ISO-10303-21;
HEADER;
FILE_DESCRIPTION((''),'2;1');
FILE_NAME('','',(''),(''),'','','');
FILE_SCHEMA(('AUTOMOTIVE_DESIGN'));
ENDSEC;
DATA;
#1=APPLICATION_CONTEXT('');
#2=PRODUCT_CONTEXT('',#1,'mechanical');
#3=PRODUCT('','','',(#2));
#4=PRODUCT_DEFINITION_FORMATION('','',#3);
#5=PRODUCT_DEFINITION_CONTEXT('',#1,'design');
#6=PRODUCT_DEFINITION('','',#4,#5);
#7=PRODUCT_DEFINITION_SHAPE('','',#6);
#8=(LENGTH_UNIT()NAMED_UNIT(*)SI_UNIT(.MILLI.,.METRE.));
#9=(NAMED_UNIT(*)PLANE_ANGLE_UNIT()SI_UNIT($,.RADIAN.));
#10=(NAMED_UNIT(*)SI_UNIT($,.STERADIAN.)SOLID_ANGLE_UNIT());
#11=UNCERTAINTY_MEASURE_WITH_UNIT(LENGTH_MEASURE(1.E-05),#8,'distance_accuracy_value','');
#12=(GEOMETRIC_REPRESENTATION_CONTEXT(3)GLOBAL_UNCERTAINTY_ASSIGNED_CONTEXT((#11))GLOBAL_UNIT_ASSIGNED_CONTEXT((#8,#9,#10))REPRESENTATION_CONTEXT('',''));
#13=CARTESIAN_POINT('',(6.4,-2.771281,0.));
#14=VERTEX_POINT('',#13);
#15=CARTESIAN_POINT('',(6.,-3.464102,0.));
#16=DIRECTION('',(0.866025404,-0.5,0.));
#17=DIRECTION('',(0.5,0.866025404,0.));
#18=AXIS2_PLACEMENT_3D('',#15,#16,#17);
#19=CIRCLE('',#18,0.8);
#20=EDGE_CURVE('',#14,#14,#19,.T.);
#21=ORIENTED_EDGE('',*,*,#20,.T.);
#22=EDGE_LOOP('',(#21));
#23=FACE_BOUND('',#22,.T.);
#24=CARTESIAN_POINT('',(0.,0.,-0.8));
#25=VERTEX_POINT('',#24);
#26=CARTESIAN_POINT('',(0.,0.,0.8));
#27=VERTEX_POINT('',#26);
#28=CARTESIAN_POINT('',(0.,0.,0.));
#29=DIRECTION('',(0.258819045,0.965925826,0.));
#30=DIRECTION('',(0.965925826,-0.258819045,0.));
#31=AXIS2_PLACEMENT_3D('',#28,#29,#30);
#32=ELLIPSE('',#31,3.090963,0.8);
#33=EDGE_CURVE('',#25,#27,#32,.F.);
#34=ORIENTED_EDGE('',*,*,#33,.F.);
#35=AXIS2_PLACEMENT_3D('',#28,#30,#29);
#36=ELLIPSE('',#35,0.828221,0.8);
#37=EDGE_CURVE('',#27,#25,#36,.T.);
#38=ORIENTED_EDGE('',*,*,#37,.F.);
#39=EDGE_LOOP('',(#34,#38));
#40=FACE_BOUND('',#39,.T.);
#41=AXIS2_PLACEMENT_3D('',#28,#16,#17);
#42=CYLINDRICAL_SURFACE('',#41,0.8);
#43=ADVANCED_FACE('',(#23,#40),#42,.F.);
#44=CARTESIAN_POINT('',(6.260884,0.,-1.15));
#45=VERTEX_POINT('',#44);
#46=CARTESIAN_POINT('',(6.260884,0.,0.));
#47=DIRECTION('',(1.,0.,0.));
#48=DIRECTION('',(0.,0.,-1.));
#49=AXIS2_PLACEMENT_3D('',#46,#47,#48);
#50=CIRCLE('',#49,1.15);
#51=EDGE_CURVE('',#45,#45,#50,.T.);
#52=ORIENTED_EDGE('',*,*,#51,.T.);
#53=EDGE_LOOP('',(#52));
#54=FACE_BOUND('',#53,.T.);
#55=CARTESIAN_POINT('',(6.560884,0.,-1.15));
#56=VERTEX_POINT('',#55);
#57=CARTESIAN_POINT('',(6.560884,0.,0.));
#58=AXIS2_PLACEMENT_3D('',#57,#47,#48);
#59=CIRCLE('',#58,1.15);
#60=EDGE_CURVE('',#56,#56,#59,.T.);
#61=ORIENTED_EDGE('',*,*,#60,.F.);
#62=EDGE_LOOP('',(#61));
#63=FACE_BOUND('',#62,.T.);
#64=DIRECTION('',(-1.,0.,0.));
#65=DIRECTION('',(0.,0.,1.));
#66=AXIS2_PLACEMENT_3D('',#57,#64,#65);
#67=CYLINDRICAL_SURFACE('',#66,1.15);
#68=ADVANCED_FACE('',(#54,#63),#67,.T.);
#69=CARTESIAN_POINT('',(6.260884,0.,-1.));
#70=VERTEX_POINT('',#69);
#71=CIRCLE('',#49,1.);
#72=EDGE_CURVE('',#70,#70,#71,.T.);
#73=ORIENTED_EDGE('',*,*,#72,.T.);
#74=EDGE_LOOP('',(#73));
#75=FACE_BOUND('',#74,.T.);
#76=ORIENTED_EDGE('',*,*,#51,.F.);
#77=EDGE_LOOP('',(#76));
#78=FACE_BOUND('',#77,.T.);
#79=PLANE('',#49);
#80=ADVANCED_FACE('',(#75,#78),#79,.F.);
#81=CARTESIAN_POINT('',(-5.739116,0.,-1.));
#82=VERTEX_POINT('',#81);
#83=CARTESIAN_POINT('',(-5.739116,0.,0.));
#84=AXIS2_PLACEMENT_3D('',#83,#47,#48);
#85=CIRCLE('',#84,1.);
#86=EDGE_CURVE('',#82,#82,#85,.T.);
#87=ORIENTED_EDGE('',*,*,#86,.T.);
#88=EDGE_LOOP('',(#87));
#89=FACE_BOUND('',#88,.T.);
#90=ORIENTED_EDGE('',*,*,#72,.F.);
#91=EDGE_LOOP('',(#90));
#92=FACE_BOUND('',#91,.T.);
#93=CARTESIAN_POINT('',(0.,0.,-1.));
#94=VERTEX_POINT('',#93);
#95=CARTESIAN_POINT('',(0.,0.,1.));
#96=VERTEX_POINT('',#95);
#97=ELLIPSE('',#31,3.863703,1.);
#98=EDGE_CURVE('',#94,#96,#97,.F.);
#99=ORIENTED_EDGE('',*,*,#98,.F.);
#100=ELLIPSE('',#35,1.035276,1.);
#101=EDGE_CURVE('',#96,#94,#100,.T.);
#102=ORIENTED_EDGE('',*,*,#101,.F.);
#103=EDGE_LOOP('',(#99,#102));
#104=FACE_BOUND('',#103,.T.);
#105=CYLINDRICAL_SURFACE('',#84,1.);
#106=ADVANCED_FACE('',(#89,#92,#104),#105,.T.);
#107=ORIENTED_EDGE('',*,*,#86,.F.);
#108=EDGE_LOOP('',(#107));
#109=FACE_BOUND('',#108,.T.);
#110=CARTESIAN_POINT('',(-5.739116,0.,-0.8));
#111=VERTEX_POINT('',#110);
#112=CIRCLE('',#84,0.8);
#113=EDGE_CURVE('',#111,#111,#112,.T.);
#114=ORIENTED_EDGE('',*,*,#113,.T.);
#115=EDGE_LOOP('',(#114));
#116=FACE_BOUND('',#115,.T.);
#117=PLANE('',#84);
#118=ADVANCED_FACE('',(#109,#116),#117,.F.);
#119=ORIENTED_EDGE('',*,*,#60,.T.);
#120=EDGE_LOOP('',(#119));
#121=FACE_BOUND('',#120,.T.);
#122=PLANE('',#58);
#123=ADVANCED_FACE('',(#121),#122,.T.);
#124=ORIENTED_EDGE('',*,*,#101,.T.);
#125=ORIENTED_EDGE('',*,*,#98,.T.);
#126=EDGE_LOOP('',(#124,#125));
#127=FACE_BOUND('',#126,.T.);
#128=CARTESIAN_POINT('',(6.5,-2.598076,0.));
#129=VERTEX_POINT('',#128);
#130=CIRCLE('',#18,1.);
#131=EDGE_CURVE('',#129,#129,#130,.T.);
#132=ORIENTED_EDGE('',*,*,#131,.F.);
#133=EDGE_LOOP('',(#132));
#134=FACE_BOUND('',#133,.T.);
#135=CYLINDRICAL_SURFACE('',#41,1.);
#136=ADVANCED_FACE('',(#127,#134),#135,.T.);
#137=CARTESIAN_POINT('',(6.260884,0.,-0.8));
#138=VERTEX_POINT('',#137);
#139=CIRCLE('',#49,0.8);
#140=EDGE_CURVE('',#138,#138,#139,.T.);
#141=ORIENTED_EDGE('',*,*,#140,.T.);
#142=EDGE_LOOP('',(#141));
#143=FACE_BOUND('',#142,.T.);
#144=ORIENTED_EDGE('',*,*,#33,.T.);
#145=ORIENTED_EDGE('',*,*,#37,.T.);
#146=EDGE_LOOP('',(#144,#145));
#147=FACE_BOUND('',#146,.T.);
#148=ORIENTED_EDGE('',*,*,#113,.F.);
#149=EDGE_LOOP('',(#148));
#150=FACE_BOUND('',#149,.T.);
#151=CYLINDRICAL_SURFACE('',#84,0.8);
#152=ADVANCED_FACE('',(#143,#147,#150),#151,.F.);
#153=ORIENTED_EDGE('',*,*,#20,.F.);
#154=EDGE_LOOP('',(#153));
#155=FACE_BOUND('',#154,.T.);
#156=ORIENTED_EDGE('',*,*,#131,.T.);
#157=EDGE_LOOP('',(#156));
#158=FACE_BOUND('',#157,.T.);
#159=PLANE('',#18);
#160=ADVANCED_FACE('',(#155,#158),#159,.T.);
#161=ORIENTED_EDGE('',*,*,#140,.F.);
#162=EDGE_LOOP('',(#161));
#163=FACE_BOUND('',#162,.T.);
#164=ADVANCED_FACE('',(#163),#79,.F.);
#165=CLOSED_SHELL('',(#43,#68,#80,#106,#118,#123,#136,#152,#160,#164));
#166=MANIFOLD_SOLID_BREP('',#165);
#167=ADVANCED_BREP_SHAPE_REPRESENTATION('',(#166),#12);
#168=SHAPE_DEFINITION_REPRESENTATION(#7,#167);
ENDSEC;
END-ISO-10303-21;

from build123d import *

# Parameters (mm, degrees)
SWEEP1_PROFILE_R    = 10
SWEEP2_PROFILE_R    = 10
SHELL2_START        = -57.391158908
SHELL2_OUTLINE_R    = 8
SHELL2_DEPTH        = 120
SHELL2_START_2      = -1e-07
SHELL2_2_OUTLINE_R  = 8
SHELL2_2_DEPTH      = 69.282032403
SKETCH27_R          = 11.5
BOSS_EXTRUDE2_DEPTH = 3
SCALE1_SCALE        = 0.1


with BuildPart() as part:
    # Sweep1: sweep along a path in Sketch3
    with BuildLine(Plane.XY) as sweep1_path:
        Line((-57.391158908, 0), (62.608841092, 0))
    # Sweep1 profile (on start of the path) → Sweep1 (sweep)
    with BuildSketch(Plane(origin=(-57.391158908, 0, 0), x_dir=(0, 0, 1), z_dir=(1, 0, 0))):
        Circle(SWEEP1_PROFILE_R)
    sweep(path=sweep1_path.line)

    # Sweep2: sweep along a path in Sketch3<4>
    with BuildLine(Plane.XY) as sweep2_path:
        Line((0, 0), (60, -34.641016151))
    # Sweep2 profile (on start of the path) → Sweep2 (sweep)
    with BuildSketch(Plane(origin=(0, 0, 0), x_dir=(0.500000000000001, 0.8660254037844382, 0), z_dir=(0.8660254037844382, -0.500000000000001, 0))):
        Circle(SWEEP2_PROFILE_R)
    sweep(path=sweep2_path.line)

    # Shell2: read off the stored shape, not the designer's step
    # Shell2 outline → Shell2 (cut)
    with BuildSketch(Plane.YZ.offset(SHELL2_START)):
        Circle(SHELL2_OUTLINE_R)
    extrude(amount=SHELL2_DEPTH, mode=Mode.SUBTRACT)

    # Shell2 2 outline → Shell2 2 (cut)
    with BuildSketch(Plane(origin=(0, 0, 0), x_dir=(0.500000000000001, 0.866025403784438, 0), z_dir=(0.866025403784438, -0.500000000000001, 0)).offset(SHELL2_START_2)):
        Circle(SHELL2_2_OUTLINE_R)
    extrude(amount=SHELL2_2_DEPTH, mode=Mode.SUBTRACT)

    # Sketch27 → Boss-Extrude2 (add)
    with BuildSketch(Plane(origin=(62.608841092, 0, 0), x_dir=(0, 0, -1), z_dir=(1, 0, 0))):
        Circle(SKETCH27_R)
    extrude(amount=BOSS_EXTRUDE2_DEPTH)


with BuildPart() as part_1:
    # Scale1: scaled about (0, 0, 0)
    add(part.part.scale(SCALE1_SCALE))


solid = part_1.part
